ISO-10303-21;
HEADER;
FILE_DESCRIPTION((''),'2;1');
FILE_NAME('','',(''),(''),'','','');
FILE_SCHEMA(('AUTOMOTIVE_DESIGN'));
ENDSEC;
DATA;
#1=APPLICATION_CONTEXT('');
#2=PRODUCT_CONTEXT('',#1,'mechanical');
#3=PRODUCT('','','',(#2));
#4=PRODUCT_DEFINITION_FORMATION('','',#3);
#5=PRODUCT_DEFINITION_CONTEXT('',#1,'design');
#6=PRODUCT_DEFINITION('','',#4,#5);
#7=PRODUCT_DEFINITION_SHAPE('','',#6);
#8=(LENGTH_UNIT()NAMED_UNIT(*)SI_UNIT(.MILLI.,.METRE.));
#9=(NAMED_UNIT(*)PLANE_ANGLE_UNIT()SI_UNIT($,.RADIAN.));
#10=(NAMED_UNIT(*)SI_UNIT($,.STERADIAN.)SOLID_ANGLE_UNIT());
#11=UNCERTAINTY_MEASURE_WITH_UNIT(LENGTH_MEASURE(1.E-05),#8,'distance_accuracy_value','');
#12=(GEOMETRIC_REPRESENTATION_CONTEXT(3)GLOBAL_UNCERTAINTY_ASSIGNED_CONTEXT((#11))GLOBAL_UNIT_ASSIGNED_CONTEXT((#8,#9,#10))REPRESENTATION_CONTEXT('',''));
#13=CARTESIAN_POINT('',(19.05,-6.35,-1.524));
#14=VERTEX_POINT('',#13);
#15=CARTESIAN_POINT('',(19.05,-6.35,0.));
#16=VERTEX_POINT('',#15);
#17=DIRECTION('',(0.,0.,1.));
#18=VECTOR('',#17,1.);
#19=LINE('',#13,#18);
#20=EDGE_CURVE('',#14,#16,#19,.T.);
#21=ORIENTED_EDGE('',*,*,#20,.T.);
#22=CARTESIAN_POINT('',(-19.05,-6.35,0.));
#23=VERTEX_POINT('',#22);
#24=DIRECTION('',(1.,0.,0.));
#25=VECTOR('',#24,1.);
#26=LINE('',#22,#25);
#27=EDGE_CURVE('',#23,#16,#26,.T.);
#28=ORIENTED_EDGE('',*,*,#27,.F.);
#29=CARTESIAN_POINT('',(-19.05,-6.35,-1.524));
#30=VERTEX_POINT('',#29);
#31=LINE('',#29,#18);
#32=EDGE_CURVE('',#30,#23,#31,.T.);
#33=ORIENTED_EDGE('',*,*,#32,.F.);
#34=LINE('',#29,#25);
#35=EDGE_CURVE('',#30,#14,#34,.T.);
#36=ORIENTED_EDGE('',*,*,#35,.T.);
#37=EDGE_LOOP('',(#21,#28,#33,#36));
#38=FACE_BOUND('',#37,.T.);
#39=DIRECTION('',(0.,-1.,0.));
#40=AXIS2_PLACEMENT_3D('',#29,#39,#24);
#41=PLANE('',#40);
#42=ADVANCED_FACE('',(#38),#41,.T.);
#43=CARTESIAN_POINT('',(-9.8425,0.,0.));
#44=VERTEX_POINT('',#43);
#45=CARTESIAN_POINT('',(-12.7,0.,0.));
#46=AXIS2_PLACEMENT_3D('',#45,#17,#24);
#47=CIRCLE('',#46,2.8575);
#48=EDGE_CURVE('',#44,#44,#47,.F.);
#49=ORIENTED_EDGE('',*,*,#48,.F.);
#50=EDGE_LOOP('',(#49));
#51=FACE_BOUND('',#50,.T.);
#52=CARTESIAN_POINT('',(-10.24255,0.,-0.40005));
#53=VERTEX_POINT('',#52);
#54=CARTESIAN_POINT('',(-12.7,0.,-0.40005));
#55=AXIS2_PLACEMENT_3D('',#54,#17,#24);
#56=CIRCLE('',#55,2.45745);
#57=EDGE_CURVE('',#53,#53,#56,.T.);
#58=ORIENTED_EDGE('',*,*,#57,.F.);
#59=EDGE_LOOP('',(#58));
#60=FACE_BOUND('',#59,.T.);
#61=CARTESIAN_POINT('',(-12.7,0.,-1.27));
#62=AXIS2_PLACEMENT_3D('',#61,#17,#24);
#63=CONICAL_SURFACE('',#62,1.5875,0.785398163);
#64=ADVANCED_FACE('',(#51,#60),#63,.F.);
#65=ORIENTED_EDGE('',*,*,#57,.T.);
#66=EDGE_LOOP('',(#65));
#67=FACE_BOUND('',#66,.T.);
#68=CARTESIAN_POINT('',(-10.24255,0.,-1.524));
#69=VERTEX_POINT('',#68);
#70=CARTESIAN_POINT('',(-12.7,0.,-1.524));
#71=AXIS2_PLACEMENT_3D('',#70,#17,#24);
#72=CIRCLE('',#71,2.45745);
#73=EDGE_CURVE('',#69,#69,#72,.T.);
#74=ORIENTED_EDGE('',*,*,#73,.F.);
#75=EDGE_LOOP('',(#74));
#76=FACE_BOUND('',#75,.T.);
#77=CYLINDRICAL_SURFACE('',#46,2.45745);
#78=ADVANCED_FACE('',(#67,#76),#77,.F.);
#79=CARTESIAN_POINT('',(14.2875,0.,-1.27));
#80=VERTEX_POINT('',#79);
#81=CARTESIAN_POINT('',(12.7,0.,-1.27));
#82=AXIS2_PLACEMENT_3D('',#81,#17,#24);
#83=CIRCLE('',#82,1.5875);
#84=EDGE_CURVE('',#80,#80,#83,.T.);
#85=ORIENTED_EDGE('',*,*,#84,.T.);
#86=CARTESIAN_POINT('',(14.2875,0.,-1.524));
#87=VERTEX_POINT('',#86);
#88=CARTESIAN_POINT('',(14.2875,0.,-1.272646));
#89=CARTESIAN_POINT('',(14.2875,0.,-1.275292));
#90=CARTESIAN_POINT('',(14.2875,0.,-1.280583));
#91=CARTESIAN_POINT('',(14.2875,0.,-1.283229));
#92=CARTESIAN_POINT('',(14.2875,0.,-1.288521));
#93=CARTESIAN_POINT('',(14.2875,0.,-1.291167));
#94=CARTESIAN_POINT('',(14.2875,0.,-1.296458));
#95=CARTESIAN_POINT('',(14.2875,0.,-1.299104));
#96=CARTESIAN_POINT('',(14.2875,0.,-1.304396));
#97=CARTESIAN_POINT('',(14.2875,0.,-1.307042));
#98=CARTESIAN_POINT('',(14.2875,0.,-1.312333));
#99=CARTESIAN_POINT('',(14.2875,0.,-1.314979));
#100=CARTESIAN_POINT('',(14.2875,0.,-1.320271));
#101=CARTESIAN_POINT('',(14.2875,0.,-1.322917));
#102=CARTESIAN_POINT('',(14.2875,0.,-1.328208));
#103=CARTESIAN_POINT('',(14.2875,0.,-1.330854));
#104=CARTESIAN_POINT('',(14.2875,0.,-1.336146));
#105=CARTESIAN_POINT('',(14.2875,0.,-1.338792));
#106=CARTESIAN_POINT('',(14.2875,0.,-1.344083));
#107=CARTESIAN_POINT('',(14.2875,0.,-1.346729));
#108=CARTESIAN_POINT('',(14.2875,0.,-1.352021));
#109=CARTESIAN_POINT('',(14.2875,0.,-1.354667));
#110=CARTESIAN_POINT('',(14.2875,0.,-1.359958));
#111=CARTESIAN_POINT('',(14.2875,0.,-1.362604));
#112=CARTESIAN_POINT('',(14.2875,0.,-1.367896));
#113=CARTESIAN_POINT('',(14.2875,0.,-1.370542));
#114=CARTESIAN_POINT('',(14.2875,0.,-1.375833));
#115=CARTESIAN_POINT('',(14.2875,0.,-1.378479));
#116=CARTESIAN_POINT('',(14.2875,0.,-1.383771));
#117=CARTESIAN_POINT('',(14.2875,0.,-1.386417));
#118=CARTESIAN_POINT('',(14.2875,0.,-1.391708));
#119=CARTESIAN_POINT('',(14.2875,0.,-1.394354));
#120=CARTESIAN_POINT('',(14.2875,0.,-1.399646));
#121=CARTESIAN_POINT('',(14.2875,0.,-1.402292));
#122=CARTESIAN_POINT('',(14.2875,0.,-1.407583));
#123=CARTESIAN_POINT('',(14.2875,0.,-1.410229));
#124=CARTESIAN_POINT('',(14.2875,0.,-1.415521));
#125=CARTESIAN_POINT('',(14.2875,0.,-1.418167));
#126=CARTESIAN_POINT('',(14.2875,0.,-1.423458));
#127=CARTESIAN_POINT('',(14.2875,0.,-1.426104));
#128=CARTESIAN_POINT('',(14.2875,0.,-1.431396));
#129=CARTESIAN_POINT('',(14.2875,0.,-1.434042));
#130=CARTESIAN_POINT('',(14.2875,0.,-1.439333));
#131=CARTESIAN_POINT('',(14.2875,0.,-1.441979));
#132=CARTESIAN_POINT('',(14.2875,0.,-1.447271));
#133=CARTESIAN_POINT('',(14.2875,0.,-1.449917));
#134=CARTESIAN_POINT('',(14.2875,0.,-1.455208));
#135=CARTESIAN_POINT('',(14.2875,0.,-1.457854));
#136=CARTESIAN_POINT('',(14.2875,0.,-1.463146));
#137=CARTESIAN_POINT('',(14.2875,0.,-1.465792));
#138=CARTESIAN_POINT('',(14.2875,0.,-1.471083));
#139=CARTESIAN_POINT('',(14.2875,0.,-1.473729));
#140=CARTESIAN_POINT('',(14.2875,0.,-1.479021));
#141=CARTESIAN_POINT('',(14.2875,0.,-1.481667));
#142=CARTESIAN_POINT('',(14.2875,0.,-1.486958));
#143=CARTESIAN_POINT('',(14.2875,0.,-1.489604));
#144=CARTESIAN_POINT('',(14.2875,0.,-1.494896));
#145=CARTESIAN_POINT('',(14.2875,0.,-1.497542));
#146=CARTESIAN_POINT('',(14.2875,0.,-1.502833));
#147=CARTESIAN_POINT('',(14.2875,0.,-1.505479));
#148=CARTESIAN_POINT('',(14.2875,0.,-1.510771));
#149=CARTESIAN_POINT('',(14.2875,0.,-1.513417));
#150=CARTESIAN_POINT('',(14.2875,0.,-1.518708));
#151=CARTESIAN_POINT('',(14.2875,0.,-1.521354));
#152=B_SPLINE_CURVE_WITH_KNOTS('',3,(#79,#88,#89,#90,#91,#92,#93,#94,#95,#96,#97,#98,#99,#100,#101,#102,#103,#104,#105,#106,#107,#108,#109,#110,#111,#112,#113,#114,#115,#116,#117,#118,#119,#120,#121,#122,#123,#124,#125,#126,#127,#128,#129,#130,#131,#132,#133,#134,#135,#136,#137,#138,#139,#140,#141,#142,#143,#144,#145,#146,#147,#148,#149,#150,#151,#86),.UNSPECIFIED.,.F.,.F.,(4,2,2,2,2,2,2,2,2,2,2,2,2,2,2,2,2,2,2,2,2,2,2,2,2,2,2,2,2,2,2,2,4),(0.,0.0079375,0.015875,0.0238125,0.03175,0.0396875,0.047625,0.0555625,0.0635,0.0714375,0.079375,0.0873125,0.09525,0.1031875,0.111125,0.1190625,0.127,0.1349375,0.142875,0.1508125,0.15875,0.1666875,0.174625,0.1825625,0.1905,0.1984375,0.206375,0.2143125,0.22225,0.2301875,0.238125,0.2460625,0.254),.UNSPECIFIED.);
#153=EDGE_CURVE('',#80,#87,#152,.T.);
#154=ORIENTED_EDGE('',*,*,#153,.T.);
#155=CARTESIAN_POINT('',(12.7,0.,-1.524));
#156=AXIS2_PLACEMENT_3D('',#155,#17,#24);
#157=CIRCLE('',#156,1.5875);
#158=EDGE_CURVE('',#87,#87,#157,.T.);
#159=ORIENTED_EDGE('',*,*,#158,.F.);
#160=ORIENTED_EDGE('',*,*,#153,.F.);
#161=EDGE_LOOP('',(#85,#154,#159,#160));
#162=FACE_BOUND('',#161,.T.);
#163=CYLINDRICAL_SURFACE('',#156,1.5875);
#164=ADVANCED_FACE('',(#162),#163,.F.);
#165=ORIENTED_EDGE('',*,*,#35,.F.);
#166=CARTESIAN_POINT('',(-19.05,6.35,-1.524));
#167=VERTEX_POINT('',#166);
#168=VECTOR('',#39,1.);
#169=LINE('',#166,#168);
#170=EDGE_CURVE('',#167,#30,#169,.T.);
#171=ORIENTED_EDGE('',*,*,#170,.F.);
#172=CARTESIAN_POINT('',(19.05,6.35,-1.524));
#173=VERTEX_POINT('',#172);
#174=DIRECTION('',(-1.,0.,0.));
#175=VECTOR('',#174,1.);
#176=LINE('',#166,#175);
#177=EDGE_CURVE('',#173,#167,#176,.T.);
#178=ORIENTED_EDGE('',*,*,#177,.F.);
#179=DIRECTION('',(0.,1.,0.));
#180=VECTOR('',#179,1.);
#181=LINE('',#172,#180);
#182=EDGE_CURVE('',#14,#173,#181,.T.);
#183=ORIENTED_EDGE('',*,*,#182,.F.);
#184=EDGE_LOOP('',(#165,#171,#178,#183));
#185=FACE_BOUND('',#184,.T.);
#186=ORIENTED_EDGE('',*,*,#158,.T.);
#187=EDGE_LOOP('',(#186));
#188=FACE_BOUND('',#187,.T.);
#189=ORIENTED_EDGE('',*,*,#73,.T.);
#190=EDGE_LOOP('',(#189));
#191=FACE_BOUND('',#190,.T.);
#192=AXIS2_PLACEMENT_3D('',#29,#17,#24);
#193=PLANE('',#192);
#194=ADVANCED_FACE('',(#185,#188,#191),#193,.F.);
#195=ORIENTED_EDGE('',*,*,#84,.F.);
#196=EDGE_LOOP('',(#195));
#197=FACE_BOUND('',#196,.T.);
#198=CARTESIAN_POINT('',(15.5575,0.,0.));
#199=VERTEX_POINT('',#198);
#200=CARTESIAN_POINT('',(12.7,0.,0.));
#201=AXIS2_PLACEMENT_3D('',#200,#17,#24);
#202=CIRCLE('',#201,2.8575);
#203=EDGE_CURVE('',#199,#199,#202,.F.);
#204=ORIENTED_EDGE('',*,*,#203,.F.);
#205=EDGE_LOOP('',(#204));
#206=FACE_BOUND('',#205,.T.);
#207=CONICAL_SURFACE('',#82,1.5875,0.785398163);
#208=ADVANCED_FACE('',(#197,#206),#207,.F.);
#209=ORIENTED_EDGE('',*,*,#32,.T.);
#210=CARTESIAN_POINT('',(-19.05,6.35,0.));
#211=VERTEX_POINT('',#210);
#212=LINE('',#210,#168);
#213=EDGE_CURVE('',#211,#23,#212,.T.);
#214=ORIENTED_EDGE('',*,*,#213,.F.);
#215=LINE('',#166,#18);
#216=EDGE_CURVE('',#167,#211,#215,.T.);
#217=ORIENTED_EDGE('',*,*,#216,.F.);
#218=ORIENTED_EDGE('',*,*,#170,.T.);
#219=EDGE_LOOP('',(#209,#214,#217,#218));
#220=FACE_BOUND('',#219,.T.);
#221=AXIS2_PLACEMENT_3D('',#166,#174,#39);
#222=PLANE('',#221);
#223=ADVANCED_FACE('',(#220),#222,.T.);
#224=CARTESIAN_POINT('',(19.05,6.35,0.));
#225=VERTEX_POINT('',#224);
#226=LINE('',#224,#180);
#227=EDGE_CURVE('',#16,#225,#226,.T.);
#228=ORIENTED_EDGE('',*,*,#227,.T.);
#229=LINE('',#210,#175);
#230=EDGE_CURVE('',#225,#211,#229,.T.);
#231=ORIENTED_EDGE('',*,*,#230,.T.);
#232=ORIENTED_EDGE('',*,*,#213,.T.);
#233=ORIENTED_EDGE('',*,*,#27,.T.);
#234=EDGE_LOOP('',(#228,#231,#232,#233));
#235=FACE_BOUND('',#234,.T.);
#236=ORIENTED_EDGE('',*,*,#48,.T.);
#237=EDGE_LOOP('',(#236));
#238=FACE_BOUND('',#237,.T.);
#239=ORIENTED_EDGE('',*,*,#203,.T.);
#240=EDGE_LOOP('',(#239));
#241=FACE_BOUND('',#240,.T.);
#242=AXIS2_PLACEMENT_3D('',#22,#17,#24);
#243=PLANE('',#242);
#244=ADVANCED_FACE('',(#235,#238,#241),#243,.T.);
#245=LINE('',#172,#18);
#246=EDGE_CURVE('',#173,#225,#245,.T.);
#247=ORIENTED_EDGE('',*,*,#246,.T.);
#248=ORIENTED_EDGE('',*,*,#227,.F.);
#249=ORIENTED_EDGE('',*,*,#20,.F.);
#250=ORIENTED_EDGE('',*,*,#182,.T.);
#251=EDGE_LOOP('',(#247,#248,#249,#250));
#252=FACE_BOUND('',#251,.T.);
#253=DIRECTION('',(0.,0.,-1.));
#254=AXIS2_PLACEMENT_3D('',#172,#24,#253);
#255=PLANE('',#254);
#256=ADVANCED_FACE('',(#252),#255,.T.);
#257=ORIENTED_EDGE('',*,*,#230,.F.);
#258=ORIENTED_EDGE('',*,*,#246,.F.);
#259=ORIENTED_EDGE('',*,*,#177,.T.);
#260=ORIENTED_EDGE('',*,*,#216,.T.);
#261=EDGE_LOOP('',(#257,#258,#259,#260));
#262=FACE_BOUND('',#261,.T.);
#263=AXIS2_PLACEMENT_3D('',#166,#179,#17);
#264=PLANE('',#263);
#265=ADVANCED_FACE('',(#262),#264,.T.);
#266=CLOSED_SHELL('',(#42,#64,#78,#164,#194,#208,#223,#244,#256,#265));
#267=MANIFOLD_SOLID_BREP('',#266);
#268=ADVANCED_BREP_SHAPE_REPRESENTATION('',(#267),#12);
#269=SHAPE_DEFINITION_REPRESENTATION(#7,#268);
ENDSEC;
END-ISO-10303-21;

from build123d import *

# Parameters (mm, degrees)
SKETCH1_W                    = 38.1
SKETCH1_H                    = 12.7
BOSS_EXTRUDE1_DEPTH          = 1.524
SKETCH2_R                    = 1.5875
CUT_EXTRUDE1_DEPTH           = 21.138211837
CHAMFER1_SIZE                = 1.27
F_10_0_1935_DIAMETER_HOLE1_D = 4.9149


# Read off the part's stored shape, not the designer's step: deleteface
with BuildPart() as part:
    # Sketch1 → Boss-Extrude1 (new body)
    with BuildSketch(Plane.XY):
        Rectangle(SKETCH1_W, SKETCH1_H)
    extrude(amount=-BOSS_EXTRUDE1_DEPTH)

    # Sketch2 → Cut-Extrude1 (cut, through all)
    with BuildSketch(Plane.XY):
        with Locations((-12.7, 0)):
            Circle(SKETCH2_R)
        with Locations((-4.233333333, 0)):
            Circle(SKETCH2_R)
        with Locations((4.233333333, 0)):
            Circle(SKETCH2_R)
        with Locations((12.7, 0)):
            Circle(SKETCH2_R)
    extrude(amount=-CUT_EXTRUDE1_DEPTH, mode=Mode.SUBTRACT)

    # Chamfer1
    chamfer1_edges = [part.edges().sort_by_distance(p)[0] for p in [
        (-14.2875, 0, 0),
        (-5.820833333, 0, 0),
        (2.645833333, 0, 0),
        (11.1125, 0, 0),
    ]]
    chamfer(chamfer1_edges, length=CHAMFER1_SIZE)

    # deleteface outline → deleteface (revolve)
    with BuildSketch(Plane(origin=(-4.233333333, 0, 0), x_dir=(1, 0, 0), z_dir=(0, -1, 0))):
        Polygon((0, -1.524), (1.5875, -1.524), (1.5875, -1.27), (2.8575, 0), (0, 0), align=None)
    revolve(axis=Axis((-4.233333333, 0, 0), (0, 0, 1)))

    # deleteface 2 outline → deleteface 2 (revolve)
    with BuildSketch(Plane(origin=(4.233333333, 0, 0), x_dir=(1, 0, 0), z_dir=(0, -1, 0))):
        Polygon((0, -1.524), (1.5875, -1.524), (1.5875, -1.27), (2.8575, 0), (0, 0), align=None)
    revolve(axis=Axis((4.233333333, 0, 0), (0, 0, 1)))

    # #10 (0.1935) Diameter Hole1 (through all)
    with Locations(Plane.XY):
        with Locations((-12.7, 0)):
            Hole(F_10_0_1935_DIAMETER_HOLE1_D / 2)


solid = part.part
